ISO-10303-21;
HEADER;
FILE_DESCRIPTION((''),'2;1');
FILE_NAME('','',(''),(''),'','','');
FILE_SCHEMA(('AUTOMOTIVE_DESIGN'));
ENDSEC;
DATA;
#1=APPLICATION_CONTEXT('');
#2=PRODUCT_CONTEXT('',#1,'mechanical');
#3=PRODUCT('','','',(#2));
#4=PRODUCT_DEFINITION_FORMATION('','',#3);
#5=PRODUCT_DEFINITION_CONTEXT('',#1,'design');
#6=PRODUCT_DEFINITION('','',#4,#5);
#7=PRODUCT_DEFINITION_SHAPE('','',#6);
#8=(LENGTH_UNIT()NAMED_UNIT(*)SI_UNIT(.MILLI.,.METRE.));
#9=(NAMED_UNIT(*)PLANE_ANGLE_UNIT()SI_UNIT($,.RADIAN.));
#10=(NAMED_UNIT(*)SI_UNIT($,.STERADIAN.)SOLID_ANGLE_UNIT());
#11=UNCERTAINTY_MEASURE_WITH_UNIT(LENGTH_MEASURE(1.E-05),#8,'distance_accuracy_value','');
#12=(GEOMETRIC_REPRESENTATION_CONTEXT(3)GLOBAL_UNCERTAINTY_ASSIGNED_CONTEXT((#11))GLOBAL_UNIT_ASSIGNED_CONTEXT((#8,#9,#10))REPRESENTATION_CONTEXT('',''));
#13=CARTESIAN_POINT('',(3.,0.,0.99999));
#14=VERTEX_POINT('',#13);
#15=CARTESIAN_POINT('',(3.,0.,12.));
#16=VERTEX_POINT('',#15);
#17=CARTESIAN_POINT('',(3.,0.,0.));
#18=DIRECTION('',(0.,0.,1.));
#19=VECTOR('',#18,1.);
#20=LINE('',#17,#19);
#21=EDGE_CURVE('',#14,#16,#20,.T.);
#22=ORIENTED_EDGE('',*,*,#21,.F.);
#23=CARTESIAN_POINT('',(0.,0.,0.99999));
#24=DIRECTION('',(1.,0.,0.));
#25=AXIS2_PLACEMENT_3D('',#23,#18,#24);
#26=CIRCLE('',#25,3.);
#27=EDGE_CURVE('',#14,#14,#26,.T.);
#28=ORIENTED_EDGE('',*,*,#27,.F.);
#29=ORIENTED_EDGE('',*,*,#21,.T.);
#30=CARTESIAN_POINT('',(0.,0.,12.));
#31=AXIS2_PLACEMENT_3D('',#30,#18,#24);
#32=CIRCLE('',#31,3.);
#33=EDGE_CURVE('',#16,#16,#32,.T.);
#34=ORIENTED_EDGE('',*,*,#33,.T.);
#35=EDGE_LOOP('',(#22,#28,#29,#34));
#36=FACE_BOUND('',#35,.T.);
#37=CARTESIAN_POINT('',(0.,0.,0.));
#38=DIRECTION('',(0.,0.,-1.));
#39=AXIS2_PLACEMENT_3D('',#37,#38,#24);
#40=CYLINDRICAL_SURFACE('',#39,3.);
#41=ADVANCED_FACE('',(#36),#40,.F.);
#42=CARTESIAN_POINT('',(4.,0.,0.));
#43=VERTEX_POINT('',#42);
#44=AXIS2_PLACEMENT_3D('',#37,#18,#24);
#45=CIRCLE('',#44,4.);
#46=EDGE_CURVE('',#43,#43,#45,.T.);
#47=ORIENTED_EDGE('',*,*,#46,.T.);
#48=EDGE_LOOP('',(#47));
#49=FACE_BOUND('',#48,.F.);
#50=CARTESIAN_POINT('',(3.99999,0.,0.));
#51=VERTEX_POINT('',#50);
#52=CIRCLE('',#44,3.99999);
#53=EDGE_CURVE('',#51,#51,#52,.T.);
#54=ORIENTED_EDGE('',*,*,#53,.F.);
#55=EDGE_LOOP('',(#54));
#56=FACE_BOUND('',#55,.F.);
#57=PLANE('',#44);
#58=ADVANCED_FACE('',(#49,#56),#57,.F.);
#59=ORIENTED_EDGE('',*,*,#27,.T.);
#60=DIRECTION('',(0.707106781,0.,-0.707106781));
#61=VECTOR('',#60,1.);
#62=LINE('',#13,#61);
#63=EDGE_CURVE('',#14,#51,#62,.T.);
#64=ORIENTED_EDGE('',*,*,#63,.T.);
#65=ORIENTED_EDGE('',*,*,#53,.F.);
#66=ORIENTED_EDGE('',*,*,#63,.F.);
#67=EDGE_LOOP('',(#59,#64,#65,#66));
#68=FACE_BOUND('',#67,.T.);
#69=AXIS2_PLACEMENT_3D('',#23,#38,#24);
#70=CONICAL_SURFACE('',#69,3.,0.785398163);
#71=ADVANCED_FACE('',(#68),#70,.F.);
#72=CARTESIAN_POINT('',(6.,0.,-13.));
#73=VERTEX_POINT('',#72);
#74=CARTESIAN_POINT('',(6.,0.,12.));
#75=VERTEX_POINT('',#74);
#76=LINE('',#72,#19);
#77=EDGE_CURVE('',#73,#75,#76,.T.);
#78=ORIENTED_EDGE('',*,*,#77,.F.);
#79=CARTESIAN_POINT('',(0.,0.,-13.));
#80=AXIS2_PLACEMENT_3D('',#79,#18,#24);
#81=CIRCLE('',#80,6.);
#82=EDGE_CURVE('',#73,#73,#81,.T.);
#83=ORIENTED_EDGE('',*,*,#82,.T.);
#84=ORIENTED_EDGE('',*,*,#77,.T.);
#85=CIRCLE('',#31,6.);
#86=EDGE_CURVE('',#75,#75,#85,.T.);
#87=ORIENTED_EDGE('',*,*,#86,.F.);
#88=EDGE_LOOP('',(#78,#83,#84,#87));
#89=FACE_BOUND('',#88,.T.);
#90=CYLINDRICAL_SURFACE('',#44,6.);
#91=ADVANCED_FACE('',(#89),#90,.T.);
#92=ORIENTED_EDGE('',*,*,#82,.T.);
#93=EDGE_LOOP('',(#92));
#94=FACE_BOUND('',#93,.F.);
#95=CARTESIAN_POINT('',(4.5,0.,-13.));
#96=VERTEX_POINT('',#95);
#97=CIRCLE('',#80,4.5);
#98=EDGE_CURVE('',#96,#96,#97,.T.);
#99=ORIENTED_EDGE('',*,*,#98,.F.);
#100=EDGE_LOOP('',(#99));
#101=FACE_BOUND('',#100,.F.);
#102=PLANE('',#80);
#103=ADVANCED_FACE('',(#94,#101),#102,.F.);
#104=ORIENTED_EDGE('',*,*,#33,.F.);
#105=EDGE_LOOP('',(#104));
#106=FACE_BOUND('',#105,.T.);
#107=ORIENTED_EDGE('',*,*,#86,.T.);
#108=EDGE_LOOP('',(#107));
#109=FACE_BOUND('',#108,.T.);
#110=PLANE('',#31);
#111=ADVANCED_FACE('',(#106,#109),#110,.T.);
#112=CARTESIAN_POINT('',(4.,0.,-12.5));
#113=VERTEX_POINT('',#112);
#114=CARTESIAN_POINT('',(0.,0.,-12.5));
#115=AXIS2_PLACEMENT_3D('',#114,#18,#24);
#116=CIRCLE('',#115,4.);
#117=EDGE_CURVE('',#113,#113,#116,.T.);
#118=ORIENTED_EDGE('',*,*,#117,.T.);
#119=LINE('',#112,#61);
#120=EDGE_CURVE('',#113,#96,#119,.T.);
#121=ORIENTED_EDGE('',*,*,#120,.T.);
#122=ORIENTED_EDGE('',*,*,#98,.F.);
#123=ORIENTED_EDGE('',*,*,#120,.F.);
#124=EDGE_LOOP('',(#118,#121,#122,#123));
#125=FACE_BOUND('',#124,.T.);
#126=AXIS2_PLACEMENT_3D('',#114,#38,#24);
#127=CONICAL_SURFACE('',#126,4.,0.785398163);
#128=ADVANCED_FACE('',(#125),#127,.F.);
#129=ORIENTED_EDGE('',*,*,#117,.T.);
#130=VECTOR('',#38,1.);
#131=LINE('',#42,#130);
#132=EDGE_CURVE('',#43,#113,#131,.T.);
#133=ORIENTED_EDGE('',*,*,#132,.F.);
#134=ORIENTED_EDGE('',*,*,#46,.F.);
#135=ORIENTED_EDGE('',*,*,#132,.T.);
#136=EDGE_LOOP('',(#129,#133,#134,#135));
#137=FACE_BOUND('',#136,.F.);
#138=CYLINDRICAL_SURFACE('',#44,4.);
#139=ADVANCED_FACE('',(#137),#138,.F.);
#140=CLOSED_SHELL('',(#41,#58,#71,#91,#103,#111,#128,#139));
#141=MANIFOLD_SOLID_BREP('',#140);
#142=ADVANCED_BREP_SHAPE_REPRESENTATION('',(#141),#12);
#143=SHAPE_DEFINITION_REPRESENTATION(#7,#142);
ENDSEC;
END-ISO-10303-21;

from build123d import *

# Parameters (mm, degrees)
F0_R     = 6
F0_R_2   = 4
F1_DEPTH = 13
F0_R_3   = 3
F2_DEPTH = 12
F3_SIZE  = 0.99999
F4_SIZE  = 0.5


# Not quite as in the source:
# - a fillet or chamfer is up to 0.001 mm smaller than in the source, because OpenCascade refuses the exact size


with BuildPart() as f1:
    # F0 (on Top) → F1 (new body)
    with BuildSketch(Plane.XY):
        Circle(F0_R)
        Circle(F0_R_2, mode=Mode.SUBTRACT)
    extrude(amount=-F1_DEPTH)

    # F0 (on Top) → F2 (join)
    with BuildSketch(Plane.XY):
        Circle(F0_R)
        Circle(F0_R_2, mode=Mode.SUBTRACT)
        Circle(F0_R_2)
        Circle(F0_R_3, mode=Mode.SUBTRACT)
    extrude(amount=F2_DEPTH)

    # F3 (size 1 in the source; OpenCascade refuses exactly that, so slightly less here)
    f3_edges = [f1.edges().sort_by_distance(p)[0] for p in [
        (-3, 0, 0),
    ]]
    chamfer(f3_edges, length=F3_SIZE)

    # F4
    f4_edges = [f1.edges().sort_by_distance(p)[0] for p in [
        (-4, 0, -13),
    ]]
    chamfer(f4_edges, length=F4_SIZE)


solid = f1.part
